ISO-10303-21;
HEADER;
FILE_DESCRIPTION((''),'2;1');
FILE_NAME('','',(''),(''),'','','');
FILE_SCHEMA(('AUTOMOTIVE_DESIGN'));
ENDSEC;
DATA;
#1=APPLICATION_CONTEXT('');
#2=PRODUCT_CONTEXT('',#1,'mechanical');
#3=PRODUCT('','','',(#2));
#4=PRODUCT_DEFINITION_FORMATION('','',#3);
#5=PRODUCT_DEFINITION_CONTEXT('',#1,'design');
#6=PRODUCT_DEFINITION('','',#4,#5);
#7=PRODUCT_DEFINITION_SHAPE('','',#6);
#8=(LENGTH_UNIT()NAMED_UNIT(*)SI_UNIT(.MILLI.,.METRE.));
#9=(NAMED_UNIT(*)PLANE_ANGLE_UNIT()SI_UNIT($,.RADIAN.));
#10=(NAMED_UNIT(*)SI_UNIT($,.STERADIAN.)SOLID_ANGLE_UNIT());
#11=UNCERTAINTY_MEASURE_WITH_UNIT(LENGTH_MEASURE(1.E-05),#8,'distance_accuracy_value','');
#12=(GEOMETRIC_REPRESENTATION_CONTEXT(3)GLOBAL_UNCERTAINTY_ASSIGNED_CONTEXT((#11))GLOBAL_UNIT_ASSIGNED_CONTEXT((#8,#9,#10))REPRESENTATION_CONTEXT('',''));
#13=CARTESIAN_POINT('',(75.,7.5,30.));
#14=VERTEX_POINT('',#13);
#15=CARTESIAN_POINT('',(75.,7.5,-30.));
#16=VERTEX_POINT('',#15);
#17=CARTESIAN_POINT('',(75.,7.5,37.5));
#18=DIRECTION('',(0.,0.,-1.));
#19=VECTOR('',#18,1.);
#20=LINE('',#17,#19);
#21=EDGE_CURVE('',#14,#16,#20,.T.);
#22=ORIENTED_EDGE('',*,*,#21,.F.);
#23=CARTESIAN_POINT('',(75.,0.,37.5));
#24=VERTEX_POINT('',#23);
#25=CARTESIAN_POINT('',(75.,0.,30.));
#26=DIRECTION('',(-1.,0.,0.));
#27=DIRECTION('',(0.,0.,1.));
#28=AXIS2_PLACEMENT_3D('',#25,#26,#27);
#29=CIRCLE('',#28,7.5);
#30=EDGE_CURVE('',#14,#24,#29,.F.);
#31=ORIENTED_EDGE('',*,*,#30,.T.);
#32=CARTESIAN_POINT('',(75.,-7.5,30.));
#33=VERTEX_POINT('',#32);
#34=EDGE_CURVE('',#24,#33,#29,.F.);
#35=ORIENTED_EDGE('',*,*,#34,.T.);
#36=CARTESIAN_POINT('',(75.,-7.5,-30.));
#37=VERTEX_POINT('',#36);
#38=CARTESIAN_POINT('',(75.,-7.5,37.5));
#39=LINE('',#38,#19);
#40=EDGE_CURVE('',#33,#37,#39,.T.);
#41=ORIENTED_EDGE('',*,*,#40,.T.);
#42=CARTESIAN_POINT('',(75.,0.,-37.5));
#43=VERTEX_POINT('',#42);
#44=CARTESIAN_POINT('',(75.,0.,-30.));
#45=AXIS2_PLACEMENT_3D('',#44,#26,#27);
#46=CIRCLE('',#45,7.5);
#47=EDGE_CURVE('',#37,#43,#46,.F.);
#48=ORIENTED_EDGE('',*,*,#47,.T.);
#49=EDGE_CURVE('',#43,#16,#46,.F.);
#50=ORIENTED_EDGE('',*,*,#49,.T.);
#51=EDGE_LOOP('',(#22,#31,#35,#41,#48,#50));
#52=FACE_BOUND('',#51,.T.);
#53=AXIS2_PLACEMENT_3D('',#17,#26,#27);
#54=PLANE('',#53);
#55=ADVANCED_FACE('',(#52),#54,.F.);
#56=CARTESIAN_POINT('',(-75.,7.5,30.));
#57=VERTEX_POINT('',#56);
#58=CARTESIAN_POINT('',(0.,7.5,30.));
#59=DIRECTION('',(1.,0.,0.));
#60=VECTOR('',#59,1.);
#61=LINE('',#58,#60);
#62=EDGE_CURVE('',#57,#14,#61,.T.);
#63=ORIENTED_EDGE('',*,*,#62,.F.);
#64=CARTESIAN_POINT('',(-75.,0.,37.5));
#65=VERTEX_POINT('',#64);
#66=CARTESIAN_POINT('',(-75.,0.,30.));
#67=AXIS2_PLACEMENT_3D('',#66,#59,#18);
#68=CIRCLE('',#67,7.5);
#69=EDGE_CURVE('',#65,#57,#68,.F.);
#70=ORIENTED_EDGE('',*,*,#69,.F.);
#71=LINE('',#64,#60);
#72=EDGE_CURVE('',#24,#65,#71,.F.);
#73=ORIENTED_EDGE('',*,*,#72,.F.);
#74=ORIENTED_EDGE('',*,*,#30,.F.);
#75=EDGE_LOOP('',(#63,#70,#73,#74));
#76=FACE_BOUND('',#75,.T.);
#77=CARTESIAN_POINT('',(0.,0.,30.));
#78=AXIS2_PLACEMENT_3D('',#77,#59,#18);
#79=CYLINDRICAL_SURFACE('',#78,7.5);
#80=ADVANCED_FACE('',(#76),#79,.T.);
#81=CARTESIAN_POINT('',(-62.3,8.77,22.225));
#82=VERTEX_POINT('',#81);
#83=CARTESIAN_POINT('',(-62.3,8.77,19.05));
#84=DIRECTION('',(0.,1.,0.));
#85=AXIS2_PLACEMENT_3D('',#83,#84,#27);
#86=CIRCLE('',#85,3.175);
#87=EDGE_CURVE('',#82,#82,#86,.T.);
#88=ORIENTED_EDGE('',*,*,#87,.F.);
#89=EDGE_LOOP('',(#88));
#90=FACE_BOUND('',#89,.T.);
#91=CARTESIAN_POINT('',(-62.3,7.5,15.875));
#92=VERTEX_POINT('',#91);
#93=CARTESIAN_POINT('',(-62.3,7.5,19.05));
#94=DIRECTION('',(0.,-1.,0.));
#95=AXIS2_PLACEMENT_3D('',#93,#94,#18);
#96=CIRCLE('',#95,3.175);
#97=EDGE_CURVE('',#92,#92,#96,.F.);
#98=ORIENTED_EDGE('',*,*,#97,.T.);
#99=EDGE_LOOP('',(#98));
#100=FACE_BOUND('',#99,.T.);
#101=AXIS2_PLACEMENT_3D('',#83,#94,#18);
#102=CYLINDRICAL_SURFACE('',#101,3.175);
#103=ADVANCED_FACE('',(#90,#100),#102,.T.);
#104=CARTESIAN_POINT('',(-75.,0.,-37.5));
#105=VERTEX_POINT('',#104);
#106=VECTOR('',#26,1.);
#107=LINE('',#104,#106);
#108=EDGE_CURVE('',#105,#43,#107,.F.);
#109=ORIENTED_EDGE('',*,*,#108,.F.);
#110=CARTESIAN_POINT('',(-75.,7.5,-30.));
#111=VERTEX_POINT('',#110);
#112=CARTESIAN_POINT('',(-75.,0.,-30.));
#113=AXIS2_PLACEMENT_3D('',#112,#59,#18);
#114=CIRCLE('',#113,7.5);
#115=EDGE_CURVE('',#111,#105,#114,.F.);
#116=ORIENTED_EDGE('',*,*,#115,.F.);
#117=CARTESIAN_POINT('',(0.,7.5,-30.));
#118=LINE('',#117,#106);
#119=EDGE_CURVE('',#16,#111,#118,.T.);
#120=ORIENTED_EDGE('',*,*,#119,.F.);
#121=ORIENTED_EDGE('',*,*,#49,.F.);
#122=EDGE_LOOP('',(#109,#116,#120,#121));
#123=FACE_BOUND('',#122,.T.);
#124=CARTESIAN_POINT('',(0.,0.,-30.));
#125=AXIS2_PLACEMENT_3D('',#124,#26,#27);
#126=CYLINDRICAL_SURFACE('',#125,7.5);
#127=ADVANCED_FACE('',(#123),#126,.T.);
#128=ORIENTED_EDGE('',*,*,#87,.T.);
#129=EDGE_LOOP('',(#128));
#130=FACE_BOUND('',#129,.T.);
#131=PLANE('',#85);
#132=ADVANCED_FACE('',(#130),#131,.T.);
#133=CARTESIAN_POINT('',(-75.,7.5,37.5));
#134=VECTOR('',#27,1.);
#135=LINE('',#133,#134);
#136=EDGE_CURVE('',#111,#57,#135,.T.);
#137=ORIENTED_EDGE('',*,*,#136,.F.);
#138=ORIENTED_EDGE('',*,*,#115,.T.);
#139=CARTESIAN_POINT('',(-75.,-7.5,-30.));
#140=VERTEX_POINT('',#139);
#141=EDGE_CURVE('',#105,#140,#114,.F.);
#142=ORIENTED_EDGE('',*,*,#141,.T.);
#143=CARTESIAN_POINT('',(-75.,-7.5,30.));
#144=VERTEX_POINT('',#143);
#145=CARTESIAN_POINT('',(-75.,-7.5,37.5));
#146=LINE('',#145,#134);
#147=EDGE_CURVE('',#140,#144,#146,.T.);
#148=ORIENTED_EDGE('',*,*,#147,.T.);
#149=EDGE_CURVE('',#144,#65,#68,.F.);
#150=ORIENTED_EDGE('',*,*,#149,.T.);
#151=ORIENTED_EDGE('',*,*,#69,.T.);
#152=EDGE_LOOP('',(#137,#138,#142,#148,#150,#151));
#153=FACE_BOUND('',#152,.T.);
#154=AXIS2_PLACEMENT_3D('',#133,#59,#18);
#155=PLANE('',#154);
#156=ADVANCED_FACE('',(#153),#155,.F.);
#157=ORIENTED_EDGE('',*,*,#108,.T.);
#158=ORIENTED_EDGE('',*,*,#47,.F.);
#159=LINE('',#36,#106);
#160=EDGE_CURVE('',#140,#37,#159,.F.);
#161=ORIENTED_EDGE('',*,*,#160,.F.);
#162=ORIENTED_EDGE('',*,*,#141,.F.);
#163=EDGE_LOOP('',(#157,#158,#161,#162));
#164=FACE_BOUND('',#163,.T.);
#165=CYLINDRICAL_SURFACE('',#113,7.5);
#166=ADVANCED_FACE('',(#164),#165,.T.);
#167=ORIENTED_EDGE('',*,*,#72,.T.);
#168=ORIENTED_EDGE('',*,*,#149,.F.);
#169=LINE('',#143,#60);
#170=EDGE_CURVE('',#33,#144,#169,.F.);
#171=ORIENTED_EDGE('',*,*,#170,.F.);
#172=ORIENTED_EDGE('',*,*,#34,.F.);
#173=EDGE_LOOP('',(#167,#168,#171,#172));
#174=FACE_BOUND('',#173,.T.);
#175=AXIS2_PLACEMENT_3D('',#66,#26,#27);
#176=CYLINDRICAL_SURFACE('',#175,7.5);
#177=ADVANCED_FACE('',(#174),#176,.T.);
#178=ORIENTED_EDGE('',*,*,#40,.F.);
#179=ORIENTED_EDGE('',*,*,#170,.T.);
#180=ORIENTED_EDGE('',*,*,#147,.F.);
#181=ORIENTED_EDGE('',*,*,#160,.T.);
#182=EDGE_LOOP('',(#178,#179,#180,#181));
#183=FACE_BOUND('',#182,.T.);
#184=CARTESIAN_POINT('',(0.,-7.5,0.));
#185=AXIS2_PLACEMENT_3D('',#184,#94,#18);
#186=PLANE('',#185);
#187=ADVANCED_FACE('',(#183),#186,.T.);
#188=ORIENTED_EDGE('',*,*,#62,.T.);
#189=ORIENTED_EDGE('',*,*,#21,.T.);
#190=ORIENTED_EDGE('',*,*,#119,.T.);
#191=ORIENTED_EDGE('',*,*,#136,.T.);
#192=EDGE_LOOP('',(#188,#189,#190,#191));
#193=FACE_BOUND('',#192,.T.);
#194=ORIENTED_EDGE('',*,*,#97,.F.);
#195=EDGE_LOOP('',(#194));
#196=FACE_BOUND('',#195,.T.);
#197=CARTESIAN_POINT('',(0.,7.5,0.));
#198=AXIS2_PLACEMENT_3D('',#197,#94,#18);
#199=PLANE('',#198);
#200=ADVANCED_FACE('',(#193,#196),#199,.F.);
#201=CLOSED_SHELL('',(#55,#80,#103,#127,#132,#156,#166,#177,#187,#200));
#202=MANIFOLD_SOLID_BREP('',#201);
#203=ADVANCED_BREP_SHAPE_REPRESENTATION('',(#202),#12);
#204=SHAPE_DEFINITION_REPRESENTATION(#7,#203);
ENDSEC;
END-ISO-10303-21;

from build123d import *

# Parameters (mm, degrees)
SKETCH1_W           = 150
SKETCH1_H           = 75
BOSS_EXTRUDE1_DEPTH = 7.5
FILLET1_R           = 7.5
SKETCH2_R           = 3.175
BOSS_EXTRUDE2_DEPTH = 1.27


with BuildPart() as part:
    # Sketch1 → Boss-Extrude1 (new, symmetric)
    with BuildSketch(Plane(origin=(0, 0, 0), x_dir=(1, 0, 0), z_dir=(0, 1, 0))):
        Rectangle(SKETCH1_W, SKETCH1_H)
    extrude(amount=BOSS_EXTRUDE1_DEPTH, both=True)

    # Fillet1
    fillet1_edges = [part.edges().sort_by_distance(p)[0] for p in [
        (0, -7.5, -37.5),
        (0, 7.5, -37.5),
        (0, -7.5, 37.5),
        (0, 7.5, 37.5),
    ]]
    fillet(fillet1_edges, radius=FILLET1_R - 0.0001)  # a hair under: the kernel refuses the full size

    # Sketch2 → Boss-Extrude2 (add)
    with BuildSketch(Plane(origin=(0, 7.5, 0), x_dir=(1, 0, 0), z_dir=(0, 1, 0))):
        with Locations(Location((-62.3, -19.05, 0), (0, 0, 90))):
            Circle(SKETCH2_R)
    extrude(amount=BOSS_EXTRUDE2_DEPTH)


solid = part.part
